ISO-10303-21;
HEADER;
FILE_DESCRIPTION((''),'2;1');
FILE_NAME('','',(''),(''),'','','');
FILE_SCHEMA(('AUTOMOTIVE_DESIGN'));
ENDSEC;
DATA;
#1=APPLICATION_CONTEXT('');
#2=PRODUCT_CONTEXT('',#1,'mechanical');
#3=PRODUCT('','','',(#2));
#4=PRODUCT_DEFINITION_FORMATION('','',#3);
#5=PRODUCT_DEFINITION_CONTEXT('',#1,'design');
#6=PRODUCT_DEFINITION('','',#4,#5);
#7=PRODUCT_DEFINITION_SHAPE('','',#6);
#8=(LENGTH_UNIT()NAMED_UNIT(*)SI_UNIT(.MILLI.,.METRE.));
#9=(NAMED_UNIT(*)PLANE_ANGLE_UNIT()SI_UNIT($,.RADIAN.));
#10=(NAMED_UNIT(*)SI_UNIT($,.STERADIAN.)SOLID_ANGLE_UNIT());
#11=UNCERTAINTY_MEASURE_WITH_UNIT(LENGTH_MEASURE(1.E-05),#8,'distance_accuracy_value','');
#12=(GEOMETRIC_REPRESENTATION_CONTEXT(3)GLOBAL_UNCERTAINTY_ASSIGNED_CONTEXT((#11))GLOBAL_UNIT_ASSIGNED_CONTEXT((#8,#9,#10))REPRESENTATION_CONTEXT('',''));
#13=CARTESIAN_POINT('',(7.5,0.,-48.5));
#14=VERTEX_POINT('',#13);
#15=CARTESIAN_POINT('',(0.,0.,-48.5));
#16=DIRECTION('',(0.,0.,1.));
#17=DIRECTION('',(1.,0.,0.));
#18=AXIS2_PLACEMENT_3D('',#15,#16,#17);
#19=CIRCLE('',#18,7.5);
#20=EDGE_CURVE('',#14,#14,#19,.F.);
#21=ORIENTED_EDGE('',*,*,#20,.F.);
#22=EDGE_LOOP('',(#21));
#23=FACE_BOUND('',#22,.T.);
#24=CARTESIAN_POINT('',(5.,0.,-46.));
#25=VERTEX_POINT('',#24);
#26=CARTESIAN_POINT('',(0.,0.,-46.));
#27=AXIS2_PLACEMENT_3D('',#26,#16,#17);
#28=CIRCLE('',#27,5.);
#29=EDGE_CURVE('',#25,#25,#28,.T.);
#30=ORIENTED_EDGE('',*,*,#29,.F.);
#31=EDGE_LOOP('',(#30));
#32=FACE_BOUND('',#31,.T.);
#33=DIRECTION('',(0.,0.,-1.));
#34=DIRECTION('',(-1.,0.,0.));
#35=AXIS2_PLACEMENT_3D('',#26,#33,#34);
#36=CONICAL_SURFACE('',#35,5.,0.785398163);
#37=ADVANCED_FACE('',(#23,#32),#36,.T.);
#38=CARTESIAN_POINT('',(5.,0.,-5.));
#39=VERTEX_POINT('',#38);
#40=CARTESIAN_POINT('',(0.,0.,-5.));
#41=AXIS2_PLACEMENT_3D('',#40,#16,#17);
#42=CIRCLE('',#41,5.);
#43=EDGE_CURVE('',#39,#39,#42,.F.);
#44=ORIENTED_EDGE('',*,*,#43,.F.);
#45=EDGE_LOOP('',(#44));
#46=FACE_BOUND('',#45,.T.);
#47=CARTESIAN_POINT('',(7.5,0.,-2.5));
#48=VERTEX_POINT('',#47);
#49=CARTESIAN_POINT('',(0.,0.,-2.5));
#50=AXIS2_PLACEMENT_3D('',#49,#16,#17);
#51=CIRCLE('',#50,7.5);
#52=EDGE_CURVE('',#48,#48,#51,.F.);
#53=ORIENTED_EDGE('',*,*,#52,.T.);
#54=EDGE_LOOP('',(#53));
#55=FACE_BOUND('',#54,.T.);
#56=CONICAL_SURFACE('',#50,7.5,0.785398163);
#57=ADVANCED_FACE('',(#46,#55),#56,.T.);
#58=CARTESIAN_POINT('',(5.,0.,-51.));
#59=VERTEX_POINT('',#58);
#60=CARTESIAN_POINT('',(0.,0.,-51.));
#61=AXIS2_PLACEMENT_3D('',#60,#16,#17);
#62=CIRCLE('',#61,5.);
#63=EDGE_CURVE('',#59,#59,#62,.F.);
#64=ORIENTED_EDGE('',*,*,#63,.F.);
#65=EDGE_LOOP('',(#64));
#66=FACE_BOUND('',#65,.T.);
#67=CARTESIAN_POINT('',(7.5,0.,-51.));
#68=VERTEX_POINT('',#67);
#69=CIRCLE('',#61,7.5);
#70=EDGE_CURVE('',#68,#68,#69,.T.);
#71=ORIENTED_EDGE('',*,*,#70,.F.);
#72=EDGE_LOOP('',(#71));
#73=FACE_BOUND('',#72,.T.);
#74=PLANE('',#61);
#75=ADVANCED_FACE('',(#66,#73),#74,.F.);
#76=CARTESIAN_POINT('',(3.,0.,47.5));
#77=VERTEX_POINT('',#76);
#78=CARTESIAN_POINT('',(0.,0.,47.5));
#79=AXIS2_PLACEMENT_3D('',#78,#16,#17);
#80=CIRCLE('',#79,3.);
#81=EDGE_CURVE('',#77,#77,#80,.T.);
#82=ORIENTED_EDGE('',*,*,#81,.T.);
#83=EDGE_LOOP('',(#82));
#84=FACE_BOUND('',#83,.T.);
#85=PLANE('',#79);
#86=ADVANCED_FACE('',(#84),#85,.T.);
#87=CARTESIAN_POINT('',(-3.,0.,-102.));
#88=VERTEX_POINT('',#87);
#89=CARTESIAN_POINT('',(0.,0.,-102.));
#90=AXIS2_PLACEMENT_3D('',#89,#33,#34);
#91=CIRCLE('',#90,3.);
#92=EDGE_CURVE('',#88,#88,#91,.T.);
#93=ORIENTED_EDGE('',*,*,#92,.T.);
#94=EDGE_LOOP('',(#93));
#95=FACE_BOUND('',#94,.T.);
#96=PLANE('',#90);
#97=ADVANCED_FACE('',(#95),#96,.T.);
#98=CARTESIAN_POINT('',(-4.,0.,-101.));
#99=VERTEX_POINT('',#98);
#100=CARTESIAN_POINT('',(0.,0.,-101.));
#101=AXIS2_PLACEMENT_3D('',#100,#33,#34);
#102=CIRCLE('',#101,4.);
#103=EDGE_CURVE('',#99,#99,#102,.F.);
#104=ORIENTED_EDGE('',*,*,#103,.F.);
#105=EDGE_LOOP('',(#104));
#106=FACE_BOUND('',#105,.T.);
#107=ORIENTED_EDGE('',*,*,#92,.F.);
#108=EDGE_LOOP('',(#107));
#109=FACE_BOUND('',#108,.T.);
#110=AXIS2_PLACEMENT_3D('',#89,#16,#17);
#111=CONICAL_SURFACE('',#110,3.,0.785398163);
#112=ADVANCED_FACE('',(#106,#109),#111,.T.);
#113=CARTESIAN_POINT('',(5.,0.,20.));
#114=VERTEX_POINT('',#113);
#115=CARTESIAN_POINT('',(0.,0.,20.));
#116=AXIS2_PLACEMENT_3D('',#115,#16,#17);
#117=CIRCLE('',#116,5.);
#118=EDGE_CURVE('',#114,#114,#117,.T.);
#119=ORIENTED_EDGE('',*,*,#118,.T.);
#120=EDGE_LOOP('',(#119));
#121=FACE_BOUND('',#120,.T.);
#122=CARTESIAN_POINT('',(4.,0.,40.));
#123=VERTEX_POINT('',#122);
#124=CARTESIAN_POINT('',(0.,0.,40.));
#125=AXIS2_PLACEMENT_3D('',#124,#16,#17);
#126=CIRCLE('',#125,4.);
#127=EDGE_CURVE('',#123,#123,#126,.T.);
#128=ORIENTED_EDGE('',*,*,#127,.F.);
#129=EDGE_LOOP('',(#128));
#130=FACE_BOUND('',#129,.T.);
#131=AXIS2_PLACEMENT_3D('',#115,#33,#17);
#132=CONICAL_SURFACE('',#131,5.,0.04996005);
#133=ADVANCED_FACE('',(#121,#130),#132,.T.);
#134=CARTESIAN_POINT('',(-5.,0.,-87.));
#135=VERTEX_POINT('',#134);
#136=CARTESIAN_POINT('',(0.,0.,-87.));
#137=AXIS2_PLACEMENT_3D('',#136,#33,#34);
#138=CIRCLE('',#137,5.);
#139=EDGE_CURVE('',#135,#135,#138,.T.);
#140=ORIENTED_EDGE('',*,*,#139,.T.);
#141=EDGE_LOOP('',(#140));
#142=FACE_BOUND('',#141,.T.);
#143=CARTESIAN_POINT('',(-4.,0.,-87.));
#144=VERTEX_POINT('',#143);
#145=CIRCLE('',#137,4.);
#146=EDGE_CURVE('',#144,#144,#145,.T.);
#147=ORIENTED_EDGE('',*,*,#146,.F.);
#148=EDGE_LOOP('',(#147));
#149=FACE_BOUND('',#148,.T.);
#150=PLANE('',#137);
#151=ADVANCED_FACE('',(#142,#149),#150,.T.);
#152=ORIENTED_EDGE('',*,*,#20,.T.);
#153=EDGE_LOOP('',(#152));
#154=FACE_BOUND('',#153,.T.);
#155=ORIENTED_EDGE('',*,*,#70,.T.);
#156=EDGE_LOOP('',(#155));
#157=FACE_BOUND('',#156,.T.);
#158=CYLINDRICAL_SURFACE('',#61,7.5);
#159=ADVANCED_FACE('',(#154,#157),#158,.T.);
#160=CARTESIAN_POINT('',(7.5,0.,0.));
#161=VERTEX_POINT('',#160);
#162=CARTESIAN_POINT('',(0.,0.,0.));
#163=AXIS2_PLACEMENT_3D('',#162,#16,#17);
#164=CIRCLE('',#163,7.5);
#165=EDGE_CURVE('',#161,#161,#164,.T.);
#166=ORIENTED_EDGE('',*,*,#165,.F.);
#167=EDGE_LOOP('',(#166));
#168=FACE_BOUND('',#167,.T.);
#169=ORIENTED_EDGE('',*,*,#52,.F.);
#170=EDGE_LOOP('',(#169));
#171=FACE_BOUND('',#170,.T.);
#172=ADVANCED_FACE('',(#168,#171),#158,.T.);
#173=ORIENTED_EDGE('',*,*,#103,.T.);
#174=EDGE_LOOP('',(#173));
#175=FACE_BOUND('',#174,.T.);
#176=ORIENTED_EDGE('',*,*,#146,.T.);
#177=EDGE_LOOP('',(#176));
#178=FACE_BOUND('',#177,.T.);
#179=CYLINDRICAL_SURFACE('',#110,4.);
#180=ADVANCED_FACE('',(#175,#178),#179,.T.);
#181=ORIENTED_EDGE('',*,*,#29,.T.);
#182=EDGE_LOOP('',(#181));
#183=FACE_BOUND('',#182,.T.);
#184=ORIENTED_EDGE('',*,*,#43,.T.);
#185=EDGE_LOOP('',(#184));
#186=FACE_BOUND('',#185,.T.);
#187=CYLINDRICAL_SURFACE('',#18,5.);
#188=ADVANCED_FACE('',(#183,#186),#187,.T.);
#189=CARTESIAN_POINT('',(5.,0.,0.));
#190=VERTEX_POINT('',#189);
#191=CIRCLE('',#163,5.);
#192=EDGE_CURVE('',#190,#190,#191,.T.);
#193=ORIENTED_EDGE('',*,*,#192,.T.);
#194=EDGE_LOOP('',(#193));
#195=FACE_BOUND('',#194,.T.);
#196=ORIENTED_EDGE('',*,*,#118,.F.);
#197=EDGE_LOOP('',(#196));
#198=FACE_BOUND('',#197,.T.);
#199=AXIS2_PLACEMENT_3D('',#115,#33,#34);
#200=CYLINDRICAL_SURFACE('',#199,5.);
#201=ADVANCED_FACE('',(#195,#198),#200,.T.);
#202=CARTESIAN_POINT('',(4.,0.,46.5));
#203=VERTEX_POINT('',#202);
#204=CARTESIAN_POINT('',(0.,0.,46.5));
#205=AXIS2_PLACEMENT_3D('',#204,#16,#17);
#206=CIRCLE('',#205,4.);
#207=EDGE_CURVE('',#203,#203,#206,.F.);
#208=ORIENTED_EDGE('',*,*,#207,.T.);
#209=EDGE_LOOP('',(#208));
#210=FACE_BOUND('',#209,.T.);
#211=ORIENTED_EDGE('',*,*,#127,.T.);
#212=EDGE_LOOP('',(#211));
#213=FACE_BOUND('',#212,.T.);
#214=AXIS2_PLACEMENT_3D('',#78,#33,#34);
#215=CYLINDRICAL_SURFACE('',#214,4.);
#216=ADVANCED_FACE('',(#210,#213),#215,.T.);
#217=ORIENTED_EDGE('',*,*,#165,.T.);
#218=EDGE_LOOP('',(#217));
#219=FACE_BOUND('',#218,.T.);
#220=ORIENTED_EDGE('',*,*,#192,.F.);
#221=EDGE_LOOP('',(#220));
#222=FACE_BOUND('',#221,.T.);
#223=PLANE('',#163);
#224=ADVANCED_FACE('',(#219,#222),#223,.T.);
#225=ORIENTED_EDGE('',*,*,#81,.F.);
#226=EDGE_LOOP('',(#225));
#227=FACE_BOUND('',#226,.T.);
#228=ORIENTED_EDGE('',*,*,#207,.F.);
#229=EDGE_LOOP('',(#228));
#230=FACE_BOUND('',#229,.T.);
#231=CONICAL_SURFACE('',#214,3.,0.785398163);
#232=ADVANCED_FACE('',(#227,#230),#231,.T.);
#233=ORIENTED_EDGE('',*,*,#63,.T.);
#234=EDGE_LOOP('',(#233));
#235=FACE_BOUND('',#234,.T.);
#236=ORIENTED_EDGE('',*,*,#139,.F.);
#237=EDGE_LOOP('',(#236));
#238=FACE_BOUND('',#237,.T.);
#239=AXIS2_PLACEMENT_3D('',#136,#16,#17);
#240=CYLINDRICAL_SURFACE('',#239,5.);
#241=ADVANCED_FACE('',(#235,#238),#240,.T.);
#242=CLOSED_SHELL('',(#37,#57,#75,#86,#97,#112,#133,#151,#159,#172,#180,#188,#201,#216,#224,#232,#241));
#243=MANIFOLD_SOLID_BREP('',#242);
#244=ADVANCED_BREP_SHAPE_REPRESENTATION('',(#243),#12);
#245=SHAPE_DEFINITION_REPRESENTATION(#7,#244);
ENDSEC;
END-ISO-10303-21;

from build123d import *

# Parameters (mm, degrees)
SKETCH_1_R          = 7.5
EXTRUDE_1_DEPTH     = 51
SKETCH_2_R          = 5
EXTRUDE_2_DEPTH     = 20
EXTRUDE_START       = 36
SKETCH_3_R          = 5
EXTRUDE_3_DEPTH     = 36
SKETCH_4_OUTSIDE_W  = 38.816
SKETCH_4_OUTSIDE_H  = 38.816
SKETCH_4_OUTSIDE_R  = 5
CUT_EXTRUDE_1_DEPTH = 46
SKETCH_5_R          = 4
EXTRUDE_4_DEPTH     = 15
SKETCH_6_R          = 5
EXTRUDE_5_DEPTH     = 20
EXTRUDE_5_TAPER     = 2.8625
EXTRUDE_START_2     = 7.5
SKETCH_7_R          = 4
EXTRUDE_6_DEPTH     = 7.5
CHAMFER_1_SIZE      = 2.5
CHAMFER_2_SIZE      = 1


with BuildPart() as part:
    # Эскиз1 → Бобышка-Вытянуть1 (new body)
    with BuildSketch(Plane.XY):
        Circle(SKETCH_1_R)
    extrude(amount=-EXTRUDE_1_DEPTH)

    # Эскиз2 → Бобышка-Вытянуть2 (add)
    with BuildSketch(Plane.XY):
        Circle(SKETCH_2_R)
    extrude(amount=EXTRUDE_2_DEPTH)

    # Эскиз3 → Бобышка-Вытянуть3 (add)
    with BuildSketch(Plane(origin=(0, 0, -51), x_dir=(-1, 0, 0), z_dir=(0, 0, -1)).offset(EXTRUDE_START)):
        with Locations(Location((0, 0, 0), (0, 0, 180))):
            Circle(SKETCH_3_R)
    extrude(amount=-EXTRUDE_3_DEPTH)

    # Эскиз4 outside → Вырез-Вытянуть1 (cut)
    with BuildSketch(Plane.XY.offset(-2.5)):
        Rectangle(SKETCH_4_OUTSIDE_W, SKETCH_4_OUTSIDE_H)
        Circle(SKETCH_4_OUTSIDE_R, mode=Mode.SUBTRACT)
    extrude(amount=-CUT_EXTRUDE_1_DEPTH, mode=Mode.SUBTRACT)

    # Эскиз5 → Бобышка-Вытянуть4 (add)
    with BuildSketch(Plane(origin=(0, 0, -87), x_dir=(-1, 0, 0), z_dir=(0, 0, -1))):
        Circle(SKETCH_5_R)
    extrude(amount=EXTRUDE_4_DEPTH)

    # Эскиз6 → Бобышка-Вытянуть5 (add)
    with BuildSketch(Plane.XY.offset(20)):
        Circle(SKETCH_6_R)
    extrude(amount=EXTRUDE_5_DEPTH, taper=EXTRUDE_5_TAPER)

    # Эскиз7 → Бобышка-Вытянуть6 (add)
    with BuildSketch(Plane.XY.offset(40).offset(EXTRUDE_START_2)):
        with Locations(Location((0, 0, 0), (0, 0, 180))):
            Circle(SKETCH_7_R)
    extrude(amount=-EXTRUDE_6_DEPTH)

    # Фаска1
    chamfer_1_edges = [part.edges().sort_by_distance(p)[0] for p in [
        (-5, 0, -48.5),
        (-5, 0, -2.5),
    ]]
    chamfer(chamfer_1_edges, length=CHAMFER_1_SIZE - 0.0001)  # a hair under: the kernel refuses the full size

    # Фаска2
    chamfer_2_edges = [part.edges().sort_by_distance(p)[0] for p in [
        (4, 0, -102),
        (4, 0, 47.5),
    ]]
    chamfer(chamfer_2_edges, length=CHAMFER_2_SIZE)


solid = part.part
